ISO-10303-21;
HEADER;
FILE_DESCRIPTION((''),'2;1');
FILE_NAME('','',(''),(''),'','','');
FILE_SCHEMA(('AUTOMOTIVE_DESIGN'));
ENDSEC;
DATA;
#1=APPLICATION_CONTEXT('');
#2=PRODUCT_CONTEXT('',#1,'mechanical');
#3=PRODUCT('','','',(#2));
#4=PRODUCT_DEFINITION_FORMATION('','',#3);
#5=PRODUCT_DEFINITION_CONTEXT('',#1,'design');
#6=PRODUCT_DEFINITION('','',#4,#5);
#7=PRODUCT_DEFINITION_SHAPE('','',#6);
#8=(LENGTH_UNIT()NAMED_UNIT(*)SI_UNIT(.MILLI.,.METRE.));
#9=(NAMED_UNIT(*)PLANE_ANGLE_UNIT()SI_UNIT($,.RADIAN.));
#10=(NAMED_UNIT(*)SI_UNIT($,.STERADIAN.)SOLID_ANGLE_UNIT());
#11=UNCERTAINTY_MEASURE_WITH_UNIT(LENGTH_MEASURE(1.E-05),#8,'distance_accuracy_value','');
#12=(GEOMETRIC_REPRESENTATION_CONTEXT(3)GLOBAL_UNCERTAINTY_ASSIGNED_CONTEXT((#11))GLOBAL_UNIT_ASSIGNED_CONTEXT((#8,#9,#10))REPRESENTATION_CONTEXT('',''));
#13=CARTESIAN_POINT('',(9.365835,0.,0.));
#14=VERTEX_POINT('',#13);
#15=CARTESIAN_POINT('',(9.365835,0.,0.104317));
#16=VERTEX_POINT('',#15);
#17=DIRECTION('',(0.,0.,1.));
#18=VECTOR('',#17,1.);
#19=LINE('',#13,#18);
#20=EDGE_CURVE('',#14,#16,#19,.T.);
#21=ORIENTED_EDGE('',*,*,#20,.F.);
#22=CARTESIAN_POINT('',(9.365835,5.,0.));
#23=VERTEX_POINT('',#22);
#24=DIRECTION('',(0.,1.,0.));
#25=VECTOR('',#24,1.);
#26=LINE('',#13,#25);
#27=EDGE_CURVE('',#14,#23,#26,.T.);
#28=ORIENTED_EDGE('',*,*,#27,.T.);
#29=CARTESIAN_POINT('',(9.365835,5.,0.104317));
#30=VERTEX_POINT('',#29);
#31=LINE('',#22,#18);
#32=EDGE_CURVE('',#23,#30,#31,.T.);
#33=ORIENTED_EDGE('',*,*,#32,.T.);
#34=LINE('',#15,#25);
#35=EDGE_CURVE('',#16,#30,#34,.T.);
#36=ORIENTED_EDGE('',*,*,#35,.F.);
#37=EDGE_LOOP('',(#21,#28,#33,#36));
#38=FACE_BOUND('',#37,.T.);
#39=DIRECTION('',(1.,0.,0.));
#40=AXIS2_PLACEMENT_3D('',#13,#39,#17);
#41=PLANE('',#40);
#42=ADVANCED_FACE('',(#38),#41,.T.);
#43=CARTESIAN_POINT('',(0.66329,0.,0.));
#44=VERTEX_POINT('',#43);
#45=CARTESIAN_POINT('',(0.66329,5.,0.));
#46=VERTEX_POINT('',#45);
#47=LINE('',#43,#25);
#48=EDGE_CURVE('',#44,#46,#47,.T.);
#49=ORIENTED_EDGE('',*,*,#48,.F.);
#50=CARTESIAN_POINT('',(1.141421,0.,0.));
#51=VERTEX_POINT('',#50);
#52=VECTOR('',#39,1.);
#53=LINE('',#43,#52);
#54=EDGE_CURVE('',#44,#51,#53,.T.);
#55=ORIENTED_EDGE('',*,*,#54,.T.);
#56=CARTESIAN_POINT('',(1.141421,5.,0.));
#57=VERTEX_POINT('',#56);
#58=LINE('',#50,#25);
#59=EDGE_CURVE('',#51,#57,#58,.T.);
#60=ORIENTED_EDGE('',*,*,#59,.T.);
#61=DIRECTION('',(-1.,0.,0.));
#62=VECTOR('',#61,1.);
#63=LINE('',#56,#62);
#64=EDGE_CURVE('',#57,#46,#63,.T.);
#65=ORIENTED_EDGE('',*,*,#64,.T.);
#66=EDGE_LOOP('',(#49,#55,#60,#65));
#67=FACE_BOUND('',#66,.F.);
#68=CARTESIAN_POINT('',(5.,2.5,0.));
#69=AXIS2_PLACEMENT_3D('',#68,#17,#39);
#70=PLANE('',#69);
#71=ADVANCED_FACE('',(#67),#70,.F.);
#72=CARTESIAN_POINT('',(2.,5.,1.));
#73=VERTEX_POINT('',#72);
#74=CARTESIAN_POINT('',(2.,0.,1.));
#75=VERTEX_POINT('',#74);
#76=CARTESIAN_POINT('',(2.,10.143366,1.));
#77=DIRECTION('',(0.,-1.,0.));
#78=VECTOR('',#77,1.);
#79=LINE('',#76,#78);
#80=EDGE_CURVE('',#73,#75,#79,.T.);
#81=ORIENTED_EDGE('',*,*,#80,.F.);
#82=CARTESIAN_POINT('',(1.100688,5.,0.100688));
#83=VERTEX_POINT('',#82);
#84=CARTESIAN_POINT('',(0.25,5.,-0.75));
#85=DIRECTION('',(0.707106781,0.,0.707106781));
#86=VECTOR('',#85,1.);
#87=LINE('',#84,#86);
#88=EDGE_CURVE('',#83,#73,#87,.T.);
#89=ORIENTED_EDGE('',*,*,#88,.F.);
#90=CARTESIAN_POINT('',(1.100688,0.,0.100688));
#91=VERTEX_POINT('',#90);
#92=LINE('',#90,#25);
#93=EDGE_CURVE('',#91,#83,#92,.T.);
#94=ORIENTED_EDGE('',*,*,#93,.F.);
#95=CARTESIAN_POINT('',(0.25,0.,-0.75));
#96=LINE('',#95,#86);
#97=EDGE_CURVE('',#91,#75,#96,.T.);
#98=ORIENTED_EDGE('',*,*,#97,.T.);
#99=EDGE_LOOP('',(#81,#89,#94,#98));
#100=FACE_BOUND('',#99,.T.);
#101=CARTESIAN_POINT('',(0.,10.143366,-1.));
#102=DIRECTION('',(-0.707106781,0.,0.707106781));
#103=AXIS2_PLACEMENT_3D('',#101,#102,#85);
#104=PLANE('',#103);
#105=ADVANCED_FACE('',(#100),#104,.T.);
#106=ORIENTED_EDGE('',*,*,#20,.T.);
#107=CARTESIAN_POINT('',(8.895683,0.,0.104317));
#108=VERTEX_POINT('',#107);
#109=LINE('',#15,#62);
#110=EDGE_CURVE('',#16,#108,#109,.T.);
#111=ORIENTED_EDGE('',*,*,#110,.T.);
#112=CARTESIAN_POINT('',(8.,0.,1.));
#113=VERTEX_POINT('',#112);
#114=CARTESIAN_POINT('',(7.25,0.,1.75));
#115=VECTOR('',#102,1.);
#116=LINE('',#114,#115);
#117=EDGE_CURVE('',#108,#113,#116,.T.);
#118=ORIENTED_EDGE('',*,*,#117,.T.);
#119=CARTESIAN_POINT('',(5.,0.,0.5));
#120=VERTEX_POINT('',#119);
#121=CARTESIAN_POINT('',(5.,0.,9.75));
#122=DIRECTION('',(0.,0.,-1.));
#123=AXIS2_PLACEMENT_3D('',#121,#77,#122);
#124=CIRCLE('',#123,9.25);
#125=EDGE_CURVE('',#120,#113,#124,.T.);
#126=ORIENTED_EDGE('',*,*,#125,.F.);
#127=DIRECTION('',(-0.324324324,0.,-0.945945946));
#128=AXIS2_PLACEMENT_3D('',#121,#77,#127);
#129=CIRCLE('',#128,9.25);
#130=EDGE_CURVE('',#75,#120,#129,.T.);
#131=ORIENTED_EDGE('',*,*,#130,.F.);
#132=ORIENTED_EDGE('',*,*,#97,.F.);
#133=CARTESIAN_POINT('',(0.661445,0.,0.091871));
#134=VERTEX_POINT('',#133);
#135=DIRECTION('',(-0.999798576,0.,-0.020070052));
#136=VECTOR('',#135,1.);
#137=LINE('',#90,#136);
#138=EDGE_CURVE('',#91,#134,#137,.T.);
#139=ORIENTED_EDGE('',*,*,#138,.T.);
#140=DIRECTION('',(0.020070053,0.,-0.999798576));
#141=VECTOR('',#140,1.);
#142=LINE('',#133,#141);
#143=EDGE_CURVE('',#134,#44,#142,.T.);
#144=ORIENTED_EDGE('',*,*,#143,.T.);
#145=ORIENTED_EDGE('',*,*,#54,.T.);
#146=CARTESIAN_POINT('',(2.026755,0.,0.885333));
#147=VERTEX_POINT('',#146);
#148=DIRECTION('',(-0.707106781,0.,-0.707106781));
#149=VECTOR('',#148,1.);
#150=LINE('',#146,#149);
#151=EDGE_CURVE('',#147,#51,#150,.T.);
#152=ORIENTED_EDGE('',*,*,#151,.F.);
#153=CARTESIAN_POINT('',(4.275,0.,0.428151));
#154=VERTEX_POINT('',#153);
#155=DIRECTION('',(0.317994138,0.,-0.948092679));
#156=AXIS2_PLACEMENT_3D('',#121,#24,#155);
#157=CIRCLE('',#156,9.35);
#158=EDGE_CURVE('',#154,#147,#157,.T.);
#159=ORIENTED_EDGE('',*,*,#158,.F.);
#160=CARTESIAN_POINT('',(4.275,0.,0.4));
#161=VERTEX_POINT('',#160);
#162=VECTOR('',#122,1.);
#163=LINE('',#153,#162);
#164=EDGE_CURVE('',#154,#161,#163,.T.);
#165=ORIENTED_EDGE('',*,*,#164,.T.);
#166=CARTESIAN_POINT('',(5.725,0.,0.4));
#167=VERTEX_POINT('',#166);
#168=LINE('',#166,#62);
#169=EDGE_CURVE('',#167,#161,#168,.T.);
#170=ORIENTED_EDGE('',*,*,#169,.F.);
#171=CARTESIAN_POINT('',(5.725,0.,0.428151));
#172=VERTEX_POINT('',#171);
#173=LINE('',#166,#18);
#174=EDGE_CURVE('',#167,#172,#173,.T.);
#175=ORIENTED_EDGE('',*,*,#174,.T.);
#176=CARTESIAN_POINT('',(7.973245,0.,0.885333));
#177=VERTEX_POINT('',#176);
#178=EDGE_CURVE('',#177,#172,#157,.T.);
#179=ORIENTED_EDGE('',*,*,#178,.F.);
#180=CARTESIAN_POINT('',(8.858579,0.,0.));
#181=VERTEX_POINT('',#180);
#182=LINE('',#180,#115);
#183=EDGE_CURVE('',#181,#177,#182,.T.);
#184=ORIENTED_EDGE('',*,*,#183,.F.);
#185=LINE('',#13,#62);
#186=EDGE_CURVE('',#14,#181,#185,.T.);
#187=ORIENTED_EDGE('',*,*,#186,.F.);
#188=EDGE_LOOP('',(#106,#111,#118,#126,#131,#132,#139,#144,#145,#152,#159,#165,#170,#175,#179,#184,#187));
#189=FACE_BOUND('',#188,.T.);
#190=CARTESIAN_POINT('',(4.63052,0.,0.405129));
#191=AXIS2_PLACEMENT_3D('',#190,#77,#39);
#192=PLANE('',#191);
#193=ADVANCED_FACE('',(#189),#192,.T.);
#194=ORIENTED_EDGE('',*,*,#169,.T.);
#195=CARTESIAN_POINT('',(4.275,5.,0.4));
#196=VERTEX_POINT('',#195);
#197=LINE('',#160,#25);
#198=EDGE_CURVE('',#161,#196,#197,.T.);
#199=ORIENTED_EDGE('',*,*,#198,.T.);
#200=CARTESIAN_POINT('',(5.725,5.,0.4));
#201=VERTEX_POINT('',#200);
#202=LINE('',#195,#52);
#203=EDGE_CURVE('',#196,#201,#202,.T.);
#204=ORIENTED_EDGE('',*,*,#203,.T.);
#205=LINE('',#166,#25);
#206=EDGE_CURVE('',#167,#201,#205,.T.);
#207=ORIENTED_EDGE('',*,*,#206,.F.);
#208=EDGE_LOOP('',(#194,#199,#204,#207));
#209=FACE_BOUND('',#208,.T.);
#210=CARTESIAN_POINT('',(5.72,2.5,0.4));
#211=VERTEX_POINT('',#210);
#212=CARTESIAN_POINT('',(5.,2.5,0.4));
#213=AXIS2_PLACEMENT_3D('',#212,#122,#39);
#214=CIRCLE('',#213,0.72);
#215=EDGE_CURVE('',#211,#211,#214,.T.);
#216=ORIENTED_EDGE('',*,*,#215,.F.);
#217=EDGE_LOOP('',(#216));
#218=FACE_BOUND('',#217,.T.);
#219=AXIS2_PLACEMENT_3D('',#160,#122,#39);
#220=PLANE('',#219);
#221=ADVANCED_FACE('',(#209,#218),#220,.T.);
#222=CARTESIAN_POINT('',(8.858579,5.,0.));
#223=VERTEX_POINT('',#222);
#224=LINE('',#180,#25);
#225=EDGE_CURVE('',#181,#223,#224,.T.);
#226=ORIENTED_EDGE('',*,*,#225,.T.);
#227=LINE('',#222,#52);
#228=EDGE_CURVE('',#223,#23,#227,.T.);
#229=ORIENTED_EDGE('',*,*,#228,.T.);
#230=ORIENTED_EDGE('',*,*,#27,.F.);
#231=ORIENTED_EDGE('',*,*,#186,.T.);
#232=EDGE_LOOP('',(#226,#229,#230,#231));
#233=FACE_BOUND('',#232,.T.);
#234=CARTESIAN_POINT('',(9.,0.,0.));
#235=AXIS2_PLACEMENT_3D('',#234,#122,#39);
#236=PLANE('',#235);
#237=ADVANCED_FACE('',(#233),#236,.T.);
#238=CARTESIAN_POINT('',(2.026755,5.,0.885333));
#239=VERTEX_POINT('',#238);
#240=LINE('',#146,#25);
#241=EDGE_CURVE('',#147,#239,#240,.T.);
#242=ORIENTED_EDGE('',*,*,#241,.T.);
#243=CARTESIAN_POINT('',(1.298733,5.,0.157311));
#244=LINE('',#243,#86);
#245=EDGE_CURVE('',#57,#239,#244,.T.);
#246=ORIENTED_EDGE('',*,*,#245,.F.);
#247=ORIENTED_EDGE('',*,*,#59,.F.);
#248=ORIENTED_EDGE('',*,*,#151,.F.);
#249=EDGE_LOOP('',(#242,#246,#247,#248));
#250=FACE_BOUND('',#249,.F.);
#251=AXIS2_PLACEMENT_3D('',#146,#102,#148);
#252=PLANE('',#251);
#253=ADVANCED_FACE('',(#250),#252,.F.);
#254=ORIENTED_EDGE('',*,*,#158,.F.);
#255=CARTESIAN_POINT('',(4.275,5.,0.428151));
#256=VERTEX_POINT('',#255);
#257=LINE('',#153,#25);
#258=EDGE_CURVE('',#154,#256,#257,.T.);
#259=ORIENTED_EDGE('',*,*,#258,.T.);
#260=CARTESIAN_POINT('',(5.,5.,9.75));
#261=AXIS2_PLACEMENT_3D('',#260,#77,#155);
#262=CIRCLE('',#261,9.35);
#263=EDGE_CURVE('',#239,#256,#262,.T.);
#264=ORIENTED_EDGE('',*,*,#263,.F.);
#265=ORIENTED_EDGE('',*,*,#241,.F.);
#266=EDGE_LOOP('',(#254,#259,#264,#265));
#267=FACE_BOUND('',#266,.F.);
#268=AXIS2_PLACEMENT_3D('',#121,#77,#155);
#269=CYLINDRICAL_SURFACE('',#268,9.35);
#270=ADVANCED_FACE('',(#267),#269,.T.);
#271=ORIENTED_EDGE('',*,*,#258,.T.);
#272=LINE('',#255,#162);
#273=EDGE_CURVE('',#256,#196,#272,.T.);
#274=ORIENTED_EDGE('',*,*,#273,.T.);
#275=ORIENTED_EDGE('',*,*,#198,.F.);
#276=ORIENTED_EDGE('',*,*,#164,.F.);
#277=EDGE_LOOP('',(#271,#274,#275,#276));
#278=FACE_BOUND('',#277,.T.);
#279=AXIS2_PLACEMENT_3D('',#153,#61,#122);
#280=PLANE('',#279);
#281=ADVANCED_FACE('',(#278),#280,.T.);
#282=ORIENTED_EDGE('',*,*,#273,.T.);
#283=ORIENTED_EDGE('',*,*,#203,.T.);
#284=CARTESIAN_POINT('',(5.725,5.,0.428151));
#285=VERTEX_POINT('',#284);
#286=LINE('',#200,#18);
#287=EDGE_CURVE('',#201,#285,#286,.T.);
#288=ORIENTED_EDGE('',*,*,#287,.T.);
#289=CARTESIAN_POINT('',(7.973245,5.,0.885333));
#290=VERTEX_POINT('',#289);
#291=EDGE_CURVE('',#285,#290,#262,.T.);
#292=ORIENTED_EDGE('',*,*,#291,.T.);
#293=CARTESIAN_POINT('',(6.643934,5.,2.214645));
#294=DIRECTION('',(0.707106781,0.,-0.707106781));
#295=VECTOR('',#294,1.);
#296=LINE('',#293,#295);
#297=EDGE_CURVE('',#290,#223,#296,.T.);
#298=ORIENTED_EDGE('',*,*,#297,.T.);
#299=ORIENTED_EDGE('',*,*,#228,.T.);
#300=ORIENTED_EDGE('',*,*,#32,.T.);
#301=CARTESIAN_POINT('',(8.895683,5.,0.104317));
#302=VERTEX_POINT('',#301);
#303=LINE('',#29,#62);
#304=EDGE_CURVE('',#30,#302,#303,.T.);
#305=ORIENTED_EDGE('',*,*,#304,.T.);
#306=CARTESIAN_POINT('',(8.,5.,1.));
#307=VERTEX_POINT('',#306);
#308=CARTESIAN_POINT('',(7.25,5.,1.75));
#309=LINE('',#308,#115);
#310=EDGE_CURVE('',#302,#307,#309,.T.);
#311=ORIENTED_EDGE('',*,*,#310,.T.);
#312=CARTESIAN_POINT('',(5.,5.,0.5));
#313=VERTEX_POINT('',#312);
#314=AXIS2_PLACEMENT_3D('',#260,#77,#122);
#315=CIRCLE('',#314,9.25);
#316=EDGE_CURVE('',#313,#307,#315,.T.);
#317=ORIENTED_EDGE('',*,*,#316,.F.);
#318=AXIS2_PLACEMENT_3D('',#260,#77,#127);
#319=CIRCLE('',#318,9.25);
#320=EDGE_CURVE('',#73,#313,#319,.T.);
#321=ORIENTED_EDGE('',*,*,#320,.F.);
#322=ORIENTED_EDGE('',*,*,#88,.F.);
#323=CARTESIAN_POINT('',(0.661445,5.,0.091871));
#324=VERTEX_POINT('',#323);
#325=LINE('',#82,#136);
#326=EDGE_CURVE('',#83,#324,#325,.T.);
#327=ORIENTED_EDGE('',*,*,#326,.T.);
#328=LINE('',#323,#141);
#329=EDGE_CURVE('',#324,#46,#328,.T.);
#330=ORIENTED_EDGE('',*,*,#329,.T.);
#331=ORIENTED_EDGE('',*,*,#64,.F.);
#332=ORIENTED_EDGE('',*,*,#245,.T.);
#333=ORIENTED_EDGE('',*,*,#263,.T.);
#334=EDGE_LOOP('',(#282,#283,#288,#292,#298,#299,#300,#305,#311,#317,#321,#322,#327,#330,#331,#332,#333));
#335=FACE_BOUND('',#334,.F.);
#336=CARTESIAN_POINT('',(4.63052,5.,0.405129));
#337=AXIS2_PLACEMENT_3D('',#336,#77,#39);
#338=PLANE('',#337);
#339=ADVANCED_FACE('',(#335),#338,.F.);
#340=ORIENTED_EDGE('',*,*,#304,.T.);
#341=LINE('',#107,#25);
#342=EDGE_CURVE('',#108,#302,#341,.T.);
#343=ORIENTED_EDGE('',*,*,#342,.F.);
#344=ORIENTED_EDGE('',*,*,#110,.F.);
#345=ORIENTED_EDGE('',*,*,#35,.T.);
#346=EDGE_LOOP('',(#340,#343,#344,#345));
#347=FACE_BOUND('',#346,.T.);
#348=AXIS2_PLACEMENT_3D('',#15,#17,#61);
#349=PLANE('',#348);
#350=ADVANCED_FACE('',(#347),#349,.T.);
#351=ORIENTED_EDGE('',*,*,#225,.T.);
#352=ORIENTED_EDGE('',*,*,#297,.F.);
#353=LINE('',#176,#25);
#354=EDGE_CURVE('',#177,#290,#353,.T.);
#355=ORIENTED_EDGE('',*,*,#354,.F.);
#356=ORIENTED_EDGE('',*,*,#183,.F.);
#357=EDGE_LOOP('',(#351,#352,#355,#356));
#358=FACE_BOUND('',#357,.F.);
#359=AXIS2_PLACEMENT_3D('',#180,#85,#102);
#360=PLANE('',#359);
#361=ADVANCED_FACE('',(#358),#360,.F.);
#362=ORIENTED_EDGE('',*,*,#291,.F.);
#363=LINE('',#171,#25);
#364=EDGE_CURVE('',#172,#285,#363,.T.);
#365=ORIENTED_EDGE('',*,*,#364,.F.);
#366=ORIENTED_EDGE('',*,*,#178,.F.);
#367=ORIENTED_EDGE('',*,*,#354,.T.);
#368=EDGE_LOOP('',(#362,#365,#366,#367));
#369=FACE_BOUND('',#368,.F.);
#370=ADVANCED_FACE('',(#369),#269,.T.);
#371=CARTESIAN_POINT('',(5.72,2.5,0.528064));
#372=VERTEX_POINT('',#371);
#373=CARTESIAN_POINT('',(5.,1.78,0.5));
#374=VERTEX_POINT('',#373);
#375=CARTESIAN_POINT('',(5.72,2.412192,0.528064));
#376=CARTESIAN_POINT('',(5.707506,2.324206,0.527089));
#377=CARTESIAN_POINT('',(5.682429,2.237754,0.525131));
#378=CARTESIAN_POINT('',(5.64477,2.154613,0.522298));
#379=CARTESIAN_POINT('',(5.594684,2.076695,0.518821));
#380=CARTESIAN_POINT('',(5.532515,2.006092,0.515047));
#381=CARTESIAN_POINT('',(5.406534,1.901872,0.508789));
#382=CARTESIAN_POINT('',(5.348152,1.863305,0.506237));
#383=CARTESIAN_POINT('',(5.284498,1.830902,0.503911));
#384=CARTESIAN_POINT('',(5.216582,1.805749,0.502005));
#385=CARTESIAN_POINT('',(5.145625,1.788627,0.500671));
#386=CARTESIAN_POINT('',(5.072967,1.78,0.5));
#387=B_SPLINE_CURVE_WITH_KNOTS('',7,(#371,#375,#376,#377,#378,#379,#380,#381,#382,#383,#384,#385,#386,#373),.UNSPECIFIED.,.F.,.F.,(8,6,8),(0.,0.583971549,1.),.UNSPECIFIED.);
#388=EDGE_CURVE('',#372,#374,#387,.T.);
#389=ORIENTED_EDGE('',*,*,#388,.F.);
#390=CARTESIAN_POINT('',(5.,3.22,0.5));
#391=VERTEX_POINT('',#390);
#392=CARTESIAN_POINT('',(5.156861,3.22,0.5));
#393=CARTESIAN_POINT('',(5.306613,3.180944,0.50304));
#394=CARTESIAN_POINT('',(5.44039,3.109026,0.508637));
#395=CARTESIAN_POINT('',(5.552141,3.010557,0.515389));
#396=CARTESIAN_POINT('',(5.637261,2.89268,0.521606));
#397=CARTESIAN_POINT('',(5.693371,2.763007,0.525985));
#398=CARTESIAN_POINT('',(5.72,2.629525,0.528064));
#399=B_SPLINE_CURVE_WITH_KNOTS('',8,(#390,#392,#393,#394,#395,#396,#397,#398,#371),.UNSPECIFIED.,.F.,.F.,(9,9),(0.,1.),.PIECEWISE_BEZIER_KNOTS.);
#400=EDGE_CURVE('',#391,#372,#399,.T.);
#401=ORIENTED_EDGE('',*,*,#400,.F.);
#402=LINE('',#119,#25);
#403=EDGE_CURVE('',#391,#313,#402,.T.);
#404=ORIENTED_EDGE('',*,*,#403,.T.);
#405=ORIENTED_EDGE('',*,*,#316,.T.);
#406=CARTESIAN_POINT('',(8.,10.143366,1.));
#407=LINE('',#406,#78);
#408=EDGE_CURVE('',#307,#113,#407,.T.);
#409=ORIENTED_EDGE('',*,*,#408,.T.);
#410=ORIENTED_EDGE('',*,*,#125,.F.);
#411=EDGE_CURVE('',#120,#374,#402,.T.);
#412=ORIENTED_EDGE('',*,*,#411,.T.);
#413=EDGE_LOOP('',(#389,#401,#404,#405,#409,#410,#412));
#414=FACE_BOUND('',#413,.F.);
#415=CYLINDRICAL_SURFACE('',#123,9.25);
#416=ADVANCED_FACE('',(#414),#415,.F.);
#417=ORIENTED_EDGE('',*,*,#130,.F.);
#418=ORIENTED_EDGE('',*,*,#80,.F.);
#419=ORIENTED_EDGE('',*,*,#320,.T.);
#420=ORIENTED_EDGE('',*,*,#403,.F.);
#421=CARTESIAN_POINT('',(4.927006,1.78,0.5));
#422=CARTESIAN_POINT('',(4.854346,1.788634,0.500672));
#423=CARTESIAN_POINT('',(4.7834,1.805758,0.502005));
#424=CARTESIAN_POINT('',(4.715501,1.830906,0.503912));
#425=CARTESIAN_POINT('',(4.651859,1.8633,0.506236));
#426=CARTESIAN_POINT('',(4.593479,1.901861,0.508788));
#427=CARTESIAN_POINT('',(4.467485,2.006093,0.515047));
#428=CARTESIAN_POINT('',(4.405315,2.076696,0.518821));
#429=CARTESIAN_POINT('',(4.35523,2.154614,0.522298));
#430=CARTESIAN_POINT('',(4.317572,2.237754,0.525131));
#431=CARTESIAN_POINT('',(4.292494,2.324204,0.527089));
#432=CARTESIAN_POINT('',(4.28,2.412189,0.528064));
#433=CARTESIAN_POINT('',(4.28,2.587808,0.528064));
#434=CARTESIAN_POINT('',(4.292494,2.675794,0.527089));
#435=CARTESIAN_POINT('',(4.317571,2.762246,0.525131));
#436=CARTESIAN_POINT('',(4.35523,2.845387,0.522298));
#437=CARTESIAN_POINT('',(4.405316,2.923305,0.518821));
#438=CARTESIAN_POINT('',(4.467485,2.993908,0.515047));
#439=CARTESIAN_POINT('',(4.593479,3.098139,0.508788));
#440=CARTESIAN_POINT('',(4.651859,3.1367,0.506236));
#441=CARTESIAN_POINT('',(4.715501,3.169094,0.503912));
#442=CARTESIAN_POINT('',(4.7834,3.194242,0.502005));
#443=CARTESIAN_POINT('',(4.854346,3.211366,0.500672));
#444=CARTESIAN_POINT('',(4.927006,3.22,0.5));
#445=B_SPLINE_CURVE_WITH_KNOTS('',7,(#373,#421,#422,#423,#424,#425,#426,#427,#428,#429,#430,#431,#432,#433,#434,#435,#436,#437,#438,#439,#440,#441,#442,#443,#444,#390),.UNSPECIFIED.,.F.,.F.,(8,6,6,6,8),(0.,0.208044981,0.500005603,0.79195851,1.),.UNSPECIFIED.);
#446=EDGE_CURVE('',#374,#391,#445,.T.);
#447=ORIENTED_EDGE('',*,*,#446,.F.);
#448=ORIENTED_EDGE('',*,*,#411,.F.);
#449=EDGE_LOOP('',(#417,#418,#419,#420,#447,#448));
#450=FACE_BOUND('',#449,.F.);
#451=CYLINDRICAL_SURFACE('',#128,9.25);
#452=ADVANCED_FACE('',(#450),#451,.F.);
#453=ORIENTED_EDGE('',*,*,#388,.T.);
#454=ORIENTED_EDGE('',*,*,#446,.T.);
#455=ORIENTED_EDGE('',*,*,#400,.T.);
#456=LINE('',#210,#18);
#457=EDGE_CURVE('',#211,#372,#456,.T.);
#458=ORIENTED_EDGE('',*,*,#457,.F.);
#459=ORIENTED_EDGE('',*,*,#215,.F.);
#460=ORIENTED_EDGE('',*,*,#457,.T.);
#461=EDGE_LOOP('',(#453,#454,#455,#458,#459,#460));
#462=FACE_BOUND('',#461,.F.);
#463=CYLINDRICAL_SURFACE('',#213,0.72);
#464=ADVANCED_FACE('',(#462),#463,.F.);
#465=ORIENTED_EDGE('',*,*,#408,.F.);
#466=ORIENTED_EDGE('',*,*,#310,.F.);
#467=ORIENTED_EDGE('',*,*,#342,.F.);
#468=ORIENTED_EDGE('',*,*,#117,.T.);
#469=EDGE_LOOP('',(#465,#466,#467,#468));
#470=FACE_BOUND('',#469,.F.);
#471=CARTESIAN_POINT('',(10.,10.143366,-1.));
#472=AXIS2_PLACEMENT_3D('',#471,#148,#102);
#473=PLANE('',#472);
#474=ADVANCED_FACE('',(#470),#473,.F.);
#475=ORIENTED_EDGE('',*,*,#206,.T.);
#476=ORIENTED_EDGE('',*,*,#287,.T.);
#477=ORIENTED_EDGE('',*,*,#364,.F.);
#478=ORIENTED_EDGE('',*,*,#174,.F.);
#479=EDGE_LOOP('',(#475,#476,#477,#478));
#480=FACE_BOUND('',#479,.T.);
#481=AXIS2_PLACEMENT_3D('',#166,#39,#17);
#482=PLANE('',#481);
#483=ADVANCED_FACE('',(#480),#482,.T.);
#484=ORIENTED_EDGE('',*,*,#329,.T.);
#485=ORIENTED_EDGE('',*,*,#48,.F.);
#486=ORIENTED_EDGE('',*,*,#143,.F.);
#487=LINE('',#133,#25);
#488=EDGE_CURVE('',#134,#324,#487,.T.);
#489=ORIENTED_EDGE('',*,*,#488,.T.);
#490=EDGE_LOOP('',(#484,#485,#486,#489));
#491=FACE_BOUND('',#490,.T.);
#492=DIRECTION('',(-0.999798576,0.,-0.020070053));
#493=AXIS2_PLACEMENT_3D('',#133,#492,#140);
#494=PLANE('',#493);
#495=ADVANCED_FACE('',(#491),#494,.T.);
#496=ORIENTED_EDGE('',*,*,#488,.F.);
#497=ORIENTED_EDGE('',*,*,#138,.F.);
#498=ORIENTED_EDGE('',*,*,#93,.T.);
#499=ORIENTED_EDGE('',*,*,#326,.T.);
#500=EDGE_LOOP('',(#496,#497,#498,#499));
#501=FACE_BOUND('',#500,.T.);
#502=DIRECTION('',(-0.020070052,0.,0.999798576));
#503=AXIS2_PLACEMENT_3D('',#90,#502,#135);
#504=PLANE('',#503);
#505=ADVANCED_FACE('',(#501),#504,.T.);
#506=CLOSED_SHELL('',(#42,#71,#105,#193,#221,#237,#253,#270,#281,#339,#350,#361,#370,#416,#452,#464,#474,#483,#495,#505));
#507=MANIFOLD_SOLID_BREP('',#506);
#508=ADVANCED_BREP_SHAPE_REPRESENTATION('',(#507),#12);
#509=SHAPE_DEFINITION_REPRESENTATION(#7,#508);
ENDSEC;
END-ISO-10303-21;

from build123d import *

# Parameters (mm, degrees)
F0_W        = 10
F0_H        = 5
F1_DEPTH    = 1
F2_T1_DEPTH = 15.2867319519
F4_DEPTH    = 25
F6_DEPTH    = 5
F8_DEPTH    = 5
F9_R        = 0.72
F10_DEPTH   = 1


# Not quite as in the source:
# - a fillet or chamfer that OpenCascade refuses, or shapes differently, is made with other operations: its cross-section is extruded or revolved along the edge and cut away or added


with BuildPart() as f1:
    # F0 (on Top) → F1 (new body)
    with BuildSketch(Plane.XY):
        with Locations((5, 2.5)):
            Rectangle(F0_W, F0_H)
    extrude(amount=F1_DEPTH)

    # F2: chamfer of 2 on 2 edges, made by hand

    # F2_s2 → F2_t1 (cut)
    with BuildSketch(Plane.XZ.offset(-10.1433659759)):
        Polygon((0, -1), (2, 1), (0, 1), align=None)
        Polygon((10, -1), (8, 1), (10, 1), align=None)
    extrude(amount=F2_T1_DEPTH, mode=Mode.SUBTRACT)

    # F3 (on face) → F4 (cut)
    with BuildSketch(Plane.XZ):
        with BuildLine():
            Line((5, 0.5), (5, 1))
            Line((5, 1), (2, 1))
            ThreePointArc((2, 1), (3.4793093674, 0.6258562046), (5, 0.5))
        make_face()
        with BuildLine():
            Line((8, 1), (5, 1))
            Line((5, 1), (5, 0.5))
            ThreePointArc((5, 0.5), (6.5206906326, 0.6258562046), (8, 1))
        make_face()
        with BuildLine():
            Line((1.1414213562, 0), (8.8585786438, 0))
            Line((8.8585786438, 0), (7.9732451927, 0.8853334511))
            ThreePointArc((7.9732451927, 0.8853334511), (5, 0.4), (2.0267548073, 0.8853334511))
            Line((2.0267548073, 0.8853334511), (1.1414213562, 0))
        make_face()
    extrude(amount=-F4_DEPTH, mode=Mode.SUBTRACT)

    # F5 (on face) → F6 (join)
    with BuildSketch(Plane.XZ):
        Polygon((8.8956828495, 0.1043171505), (9, 0), (9.3658352271, 0), (9.3658352271, 0.1043171505), align=None)
        Polygon((0.6632895378, 0), (1, 0), (1.1006881325, 0.1006881325), (0.6614453159, 0.0918707301), align=None)
    extrude(amount=-F6_DEPTH)

    # F7 (on face) → F8 (join)
    with BuildSketch(Plane.XZ):
        with BuildLine():
            Line((4.275, 0.4), (5, 0.4))
            ThreePointArc((5, 0.4), (4.6372268408, 0.4070403172), (4.275, 0.4281506663))
            Line((4.275, 0.4281506663), (4.275, 0.4))
        make_face()
        with BuildLine():
            ThreePointArc((5.725, 0.4281506663), (5.3627731592, 0.4070403172), (5, 0.4))
            Line((5, 0.4), (5.725, 0.4))
            Line((5.725, 0.4), (5.725, 0.4281506663))
        make_face()
    extrude(amount=-F8_DEPTH)

    # F9 (on face) → F10 (cut)
    with BuildSketch(Plane(origin=(0, 0, 0.4), x_dir=(1, 0, 0), z_dir=(0, 0, -1))):
        with Locations((5, -2.5)):
            Circle(F9_R)
    extrude(amount=-F10_DEPTH, mode=Mode.SUBTRACT)


solid = f1.part
